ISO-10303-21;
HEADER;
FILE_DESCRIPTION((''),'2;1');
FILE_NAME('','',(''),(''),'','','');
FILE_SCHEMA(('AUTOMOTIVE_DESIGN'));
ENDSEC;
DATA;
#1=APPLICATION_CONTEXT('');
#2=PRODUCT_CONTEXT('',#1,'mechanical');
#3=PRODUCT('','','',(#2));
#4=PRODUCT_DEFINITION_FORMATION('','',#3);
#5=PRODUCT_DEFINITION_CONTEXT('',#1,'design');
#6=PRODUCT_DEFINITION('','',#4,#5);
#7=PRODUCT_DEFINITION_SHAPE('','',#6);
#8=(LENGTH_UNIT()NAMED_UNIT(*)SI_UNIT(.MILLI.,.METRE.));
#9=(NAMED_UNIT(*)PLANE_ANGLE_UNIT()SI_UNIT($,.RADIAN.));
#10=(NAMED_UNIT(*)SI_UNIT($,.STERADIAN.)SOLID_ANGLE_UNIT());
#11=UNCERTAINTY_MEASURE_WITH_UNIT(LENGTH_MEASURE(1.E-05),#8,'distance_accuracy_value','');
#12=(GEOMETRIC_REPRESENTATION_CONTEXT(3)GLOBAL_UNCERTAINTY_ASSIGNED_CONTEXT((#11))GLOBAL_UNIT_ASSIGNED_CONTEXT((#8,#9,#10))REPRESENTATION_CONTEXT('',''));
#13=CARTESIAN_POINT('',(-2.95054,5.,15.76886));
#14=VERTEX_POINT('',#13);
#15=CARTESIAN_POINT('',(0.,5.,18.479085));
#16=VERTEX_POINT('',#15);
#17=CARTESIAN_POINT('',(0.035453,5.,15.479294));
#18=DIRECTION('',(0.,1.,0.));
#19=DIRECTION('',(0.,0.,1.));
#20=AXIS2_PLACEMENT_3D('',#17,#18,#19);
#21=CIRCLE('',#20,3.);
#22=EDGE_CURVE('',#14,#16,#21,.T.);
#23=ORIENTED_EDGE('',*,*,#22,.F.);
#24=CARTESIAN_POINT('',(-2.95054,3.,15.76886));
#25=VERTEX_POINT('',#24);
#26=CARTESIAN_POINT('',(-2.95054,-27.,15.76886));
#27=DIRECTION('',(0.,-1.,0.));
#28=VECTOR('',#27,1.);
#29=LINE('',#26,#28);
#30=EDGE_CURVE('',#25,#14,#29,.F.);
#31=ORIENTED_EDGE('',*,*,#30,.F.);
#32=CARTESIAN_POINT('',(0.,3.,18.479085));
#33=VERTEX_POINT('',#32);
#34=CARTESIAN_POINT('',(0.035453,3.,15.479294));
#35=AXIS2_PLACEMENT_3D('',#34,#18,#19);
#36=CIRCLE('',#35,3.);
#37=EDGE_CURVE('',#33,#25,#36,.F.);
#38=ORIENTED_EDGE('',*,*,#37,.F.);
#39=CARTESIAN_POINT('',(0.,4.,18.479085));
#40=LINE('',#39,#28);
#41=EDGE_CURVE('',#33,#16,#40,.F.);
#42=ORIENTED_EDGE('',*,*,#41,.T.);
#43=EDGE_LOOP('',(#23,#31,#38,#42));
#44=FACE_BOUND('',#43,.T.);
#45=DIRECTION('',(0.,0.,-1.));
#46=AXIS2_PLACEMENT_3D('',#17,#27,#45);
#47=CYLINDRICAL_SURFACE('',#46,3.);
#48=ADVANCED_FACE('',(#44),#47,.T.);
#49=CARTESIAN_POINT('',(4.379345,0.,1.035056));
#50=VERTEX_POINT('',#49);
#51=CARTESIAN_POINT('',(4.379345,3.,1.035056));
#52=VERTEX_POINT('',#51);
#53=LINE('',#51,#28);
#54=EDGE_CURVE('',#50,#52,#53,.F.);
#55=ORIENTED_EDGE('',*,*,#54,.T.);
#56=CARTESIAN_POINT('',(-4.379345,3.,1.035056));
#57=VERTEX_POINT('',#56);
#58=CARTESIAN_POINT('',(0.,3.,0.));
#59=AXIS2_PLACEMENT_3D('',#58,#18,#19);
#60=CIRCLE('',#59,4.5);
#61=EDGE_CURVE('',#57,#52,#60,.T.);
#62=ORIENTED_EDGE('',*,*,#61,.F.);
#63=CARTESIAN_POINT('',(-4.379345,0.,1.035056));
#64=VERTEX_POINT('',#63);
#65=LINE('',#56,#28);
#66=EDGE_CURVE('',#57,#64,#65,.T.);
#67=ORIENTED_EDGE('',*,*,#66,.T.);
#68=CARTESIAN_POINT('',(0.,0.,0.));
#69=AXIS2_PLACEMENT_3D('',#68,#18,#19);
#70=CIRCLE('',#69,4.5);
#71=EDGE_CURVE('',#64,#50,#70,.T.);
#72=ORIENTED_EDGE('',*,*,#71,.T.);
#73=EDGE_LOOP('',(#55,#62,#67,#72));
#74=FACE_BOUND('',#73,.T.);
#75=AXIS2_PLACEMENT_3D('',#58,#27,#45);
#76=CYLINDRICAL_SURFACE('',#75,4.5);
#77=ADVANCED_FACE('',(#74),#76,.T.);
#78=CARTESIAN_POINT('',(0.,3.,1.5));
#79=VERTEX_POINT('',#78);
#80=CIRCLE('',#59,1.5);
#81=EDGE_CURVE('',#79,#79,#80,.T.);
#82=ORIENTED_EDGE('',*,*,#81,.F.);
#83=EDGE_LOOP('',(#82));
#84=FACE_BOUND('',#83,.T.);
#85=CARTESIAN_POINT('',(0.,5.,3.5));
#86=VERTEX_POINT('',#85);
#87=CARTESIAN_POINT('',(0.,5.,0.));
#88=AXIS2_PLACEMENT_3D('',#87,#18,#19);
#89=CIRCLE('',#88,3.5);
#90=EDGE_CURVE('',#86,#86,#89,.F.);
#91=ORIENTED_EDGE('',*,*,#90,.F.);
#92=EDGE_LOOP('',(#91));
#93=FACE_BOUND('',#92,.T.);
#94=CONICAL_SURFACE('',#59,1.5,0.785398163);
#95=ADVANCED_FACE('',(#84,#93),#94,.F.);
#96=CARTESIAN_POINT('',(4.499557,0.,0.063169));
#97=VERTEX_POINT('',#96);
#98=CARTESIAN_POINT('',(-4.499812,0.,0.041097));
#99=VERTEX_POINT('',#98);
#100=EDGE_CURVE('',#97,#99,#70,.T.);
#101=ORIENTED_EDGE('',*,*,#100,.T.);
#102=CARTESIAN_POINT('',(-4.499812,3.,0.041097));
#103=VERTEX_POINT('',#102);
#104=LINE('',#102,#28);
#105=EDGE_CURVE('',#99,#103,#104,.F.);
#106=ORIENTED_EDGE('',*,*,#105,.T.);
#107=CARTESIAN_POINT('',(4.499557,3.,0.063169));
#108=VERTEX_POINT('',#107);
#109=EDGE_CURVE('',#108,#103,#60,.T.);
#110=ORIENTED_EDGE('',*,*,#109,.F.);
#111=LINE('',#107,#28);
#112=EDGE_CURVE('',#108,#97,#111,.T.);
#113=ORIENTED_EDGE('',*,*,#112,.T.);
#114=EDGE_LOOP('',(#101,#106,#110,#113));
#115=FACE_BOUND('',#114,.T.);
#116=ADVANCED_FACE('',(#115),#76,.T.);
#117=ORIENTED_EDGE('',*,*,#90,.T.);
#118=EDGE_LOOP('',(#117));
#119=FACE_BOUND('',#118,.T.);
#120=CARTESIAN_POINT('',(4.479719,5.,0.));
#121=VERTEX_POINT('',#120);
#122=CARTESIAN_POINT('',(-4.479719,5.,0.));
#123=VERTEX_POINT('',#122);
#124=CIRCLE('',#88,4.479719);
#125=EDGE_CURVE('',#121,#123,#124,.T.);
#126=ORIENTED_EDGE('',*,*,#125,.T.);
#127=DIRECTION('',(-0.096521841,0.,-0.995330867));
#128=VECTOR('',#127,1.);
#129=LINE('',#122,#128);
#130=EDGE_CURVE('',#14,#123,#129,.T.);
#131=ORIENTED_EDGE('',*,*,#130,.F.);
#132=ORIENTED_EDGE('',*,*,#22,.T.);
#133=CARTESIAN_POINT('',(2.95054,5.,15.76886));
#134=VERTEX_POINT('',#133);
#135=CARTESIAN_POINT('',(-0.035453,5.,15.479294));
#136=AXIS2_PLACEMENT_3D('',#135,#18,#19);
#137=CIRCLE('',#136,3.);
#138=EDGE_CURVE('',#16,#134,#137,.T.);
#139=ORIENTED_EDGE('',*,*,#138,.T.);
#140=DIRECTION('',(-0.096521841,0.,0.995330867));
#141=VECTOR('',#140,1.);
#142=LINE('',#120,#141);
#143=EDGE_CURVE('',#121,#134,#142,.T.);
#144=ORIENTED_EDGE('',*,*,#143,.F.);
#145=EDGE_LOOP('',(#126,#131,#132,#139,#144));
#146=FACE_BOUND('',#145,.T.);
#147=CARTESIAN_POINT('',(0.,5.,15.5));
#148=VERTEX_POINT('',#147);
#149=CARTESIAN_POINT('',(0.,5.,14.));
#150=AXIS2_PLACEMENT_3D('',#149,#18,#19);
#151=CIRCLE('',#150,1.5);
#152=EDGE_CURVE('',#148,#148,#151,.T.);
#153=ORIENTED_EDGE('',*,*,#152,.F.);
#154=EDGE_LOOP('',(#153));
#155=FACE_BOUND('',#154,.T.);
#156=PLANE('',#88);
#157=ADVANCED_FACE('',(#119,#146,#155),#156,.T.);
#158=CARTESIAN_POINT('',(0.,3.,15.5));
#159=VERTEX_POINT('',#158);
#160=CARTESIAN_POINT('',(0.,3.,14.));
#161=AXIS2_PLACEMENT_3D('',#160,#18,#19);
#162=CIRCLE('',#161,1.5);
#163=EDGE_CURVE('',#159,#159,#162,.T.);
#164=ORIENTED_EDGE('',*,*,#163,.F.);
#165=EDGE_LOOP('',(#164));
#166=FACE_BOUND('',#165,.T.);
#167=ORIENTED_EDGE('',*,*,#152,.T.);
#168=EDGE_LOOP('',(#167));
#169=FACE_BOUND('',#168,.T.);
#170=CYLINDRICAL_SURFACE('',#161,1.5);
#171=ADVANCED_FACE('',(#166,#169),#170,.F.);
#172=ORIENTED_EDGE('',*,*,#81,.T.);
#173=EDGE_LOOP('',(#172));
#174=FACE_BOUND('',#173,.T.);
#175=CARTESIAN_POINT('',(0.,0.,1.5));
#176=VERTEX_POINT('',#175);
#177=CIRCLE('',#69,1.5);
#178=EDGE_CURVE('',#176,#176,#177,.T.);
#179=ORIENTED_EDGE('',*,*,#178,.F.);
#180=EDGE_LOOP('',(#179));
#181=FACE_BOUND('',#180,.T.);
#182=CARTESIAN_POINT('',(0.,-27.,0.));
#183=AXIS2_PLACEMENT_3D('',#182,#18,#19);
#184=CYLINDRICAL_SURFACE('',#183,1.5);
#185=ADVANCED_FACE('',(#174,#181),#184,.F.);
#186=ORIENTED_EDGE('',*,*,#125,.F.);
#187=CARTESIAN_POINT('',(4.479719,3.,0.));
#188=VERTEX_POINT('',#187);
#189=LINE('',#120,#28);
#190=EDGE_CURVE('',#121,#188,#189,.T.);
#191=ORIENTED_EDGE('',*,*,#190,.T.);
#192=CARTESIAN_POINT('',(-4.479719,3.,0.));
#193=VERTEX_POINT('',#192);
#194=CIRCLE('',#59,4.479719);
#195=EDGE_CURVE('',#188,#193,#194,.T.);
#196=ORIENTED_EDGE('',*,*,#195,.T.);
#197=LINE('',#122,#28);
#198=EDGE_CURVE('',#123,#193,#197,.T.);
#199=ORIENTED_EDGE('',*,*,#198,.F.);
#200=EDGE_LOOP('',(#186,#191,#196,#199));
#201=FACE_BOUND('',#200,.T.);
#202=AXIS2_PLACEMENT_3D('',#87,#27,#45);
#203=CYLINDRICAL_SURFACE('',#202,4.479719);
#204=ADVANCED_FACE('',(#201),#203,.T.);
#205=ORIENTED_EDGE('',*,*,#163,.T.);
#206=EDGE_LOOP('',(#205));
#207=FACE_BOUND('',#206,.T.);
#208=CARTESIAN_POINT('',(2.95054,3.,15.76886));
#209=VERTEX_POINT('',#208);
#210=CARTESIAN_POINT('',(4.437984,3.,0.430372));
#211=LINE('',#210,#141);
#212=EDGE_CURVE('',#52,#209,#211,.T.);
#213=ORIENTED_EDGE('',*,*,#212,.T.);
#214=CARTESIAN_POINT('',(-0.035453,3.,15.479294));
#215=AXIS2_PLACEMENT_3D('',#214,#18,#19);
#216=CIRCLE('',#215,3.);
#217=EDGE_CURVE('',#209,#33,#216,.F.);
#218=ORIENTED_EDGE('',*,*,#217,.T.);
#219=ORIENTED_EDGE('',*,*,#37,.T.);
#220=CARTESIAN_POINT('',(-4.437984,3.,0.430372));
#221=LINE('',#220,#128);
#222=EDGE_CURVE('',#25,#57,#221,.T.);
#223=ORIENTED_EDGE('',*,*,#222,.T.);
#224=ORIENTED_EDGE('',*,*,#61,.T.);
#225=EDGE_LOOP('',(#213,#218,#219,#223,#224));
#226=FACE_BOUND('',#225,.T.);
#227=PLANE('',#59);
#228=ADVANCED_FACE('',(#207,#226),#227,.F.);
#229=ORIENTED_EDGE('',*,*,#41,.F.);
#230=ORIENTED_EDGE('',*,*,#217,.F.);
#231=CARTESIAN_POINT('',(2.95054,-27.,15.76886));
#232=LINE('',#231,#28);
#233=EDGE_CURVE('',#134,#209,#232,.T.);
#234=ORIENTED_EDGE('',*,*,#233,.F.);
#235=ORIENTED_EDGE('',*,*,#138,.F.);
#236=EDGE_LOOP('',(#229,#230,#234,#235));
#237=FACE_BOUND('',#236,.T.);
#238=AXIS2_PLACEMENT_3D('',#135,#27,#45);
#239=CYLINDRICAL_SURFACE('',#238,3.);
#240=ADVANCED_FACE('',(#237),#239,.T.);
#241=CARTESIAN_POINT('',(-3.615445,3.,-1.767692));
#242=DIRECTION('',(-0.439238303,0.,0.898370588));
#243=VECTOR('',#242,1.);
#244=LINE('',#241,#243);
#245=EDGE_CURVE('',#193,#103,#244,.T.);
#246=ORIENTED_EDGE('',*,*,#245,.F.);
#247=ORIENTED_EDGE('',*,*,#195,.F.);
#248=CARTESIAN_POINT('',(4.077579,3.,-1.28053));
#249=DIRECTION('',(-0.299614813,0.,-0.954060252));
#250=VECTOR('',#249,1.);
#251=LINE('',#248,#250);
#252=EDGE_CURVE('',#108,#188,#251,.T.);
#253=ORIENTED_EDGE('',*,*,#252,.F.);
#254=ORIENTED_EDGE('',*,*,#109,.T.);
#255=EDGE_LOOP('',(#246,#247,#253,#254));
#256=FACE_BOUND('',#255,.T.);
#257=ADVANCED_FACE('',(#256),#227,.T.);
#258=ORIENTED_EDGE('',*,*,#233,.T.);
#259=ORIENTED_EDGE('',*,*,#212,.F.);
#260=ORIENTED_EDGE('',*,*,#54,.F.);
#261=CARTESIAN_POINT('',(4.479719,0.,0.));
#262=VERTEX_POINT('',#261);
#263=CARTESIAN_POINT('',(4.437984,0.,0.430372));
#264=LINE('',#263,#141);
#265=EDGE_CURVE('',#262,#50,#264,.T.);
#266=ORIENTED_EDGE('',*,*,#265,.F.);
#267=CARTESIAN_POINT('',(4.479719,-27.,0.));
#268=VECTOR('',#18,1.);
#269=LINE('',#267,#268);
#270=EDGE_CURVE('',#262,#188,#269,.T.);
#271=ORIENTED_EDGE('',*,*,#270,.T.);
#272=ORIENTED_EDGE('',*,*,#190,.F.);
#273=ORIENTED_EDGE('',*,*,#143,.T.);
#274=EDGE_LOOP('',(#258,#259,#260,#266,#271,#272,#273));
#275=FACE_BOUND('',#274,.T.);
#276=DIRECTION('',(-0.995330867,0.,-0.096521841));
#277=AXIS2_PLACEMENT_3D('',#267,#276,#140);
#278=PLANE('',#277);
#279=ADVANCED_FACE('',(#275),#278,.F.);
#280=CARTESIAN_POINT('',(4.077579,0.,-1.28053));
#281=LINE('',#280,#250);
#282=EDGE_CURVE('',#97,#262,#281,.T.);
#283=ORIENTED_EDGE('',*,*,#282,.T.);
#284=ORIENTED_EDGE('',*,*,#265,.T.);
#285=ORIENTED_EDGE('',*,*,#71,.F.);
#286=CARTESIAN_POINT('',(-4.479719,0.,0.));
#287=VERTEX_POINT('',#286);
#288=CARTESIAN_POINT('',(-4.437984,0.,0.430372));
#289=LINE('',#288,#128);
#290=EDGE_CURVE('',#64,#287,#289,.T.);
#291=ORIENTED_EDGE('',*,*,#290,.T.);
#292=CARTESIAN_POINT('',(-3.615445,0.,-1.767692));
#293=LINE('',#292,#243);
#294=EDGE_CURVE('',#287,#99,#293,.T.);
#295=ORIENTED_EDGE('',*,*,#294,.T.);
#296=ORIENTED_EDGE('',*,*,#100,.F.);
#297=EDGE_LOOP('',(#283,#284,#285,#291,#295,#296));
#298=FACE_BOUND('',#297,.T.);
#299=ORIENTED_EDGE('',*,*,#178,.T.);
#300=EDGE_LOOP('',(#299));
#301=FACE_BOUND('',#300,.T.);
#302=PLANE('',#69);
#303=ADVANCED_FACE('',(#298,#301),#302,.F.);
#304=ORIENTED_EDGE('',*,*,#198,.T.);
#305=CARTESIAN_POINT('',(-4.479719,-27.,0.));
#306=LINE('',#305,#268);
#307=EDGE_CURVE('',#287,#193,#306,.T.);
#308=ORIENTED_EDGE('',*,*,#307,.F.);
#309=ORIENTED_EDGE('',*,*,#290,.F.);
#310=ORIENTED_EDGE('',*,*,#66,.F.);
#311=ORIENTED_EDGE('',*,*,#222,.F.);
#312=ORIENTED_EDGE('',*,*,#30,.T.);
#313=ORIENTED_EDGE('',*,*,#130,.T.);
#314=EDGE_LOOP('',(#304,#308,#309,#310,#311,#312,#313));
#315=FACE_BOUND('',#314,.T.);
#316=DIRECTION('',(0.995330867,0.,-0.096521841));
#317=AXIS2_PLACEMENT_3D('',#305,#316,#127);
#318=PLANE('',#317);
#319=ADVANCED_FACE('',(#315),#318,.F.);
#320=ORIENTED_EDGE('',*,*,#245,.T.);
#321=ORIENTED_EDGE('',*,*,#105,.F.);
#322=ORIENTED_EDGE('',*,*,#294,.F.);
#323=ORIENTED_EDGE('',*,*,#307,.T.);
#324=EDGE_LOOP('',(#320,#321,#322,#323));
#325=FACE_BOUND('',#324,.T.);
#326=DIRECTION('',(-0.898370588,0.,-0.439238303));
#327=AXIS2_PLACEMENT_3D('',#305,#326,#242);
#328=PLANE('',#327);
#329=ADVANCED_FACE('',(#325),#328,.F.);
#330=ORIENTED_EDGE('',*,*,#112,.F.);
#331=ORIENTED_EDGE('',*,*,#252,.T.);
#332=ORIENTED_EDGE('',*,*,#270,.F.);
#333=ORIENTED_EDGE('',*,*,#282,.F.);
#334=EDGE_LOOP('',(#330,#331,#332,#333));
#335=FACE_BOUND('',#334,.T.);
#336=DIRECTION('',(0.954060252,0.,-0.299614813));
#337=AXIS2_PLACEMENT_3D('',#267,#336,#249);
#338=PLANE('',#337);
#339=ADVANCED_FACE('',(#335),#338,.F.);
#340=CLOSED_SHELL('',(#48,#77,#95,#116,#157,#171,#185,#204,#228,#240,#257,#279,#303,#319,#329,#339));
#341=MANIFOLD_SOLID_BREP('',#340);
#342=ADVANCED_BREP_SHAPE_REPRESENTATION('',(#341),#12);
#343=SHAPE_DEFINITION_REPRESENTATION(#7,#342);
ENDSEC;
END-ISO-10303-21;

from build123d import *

# Parameters (mm, degrees)
SKETCH1_R           = 4.5
BOSS_EXTRUDE1_DEPTH = 3
BOSS_EXTRUDE2_DEPTH = 2
SKETCH3_R           = 1
CUT_EXTRUDE1_DEPTH  = 2
SKETCH4_R           = 1.5
CUT_EXTRUDE3_DEPTH  = 32
CHAMFER1_SIZE       = 2
CUT_EXTRUDE4_DEPTH  = 32
FILLET1_R           = 3
SKETCH6_R           = 1.5
CUT_EXTRUDE5_DEPTH  = 2


with BuildPart() as part:
    # Sketch1 → Boss-Extrude1 (new body)
    with BuildSketch(Plane(origin=(0, 0, 0), x_dir=(1, 0, 0), z_dir=(0, 1, 0))):
        with Locations(Location((0, 0, 0), (0, 0, 270))):
            Circle(SKETCH1_R)
    extrude(amount=BOSS_EXTRUDE1_DEPTH)

    # Sketch2 → Boss-Extrude2 (add)
    with BuildSketch(Plane(origin=(0, 3, 0), x_dir=(1, 0, 0), z_dir=(0, 1, 0))):
        with BuildLine():
            Line((4.479718811, 0), (4.479718811, -14))
            ThreePointArc((4.479718811, -14), (0, -18.479718811), (-4.479718811, -14))
            Line((-4.479718811, -14), (-4.479718811, 0))
            ThreePointArc((-4.479718811, 0), (0, 4.479718811), (4.479718811, 0))
        make_face()
    extrude(amount=BOSS_EXTRUDE2_DEPTH)

    # Sketch3 → Cut-Extrude1 (cut)
    with BuildSketch(Plane(origin=(0, 5, 0), x_dir=(1, 0, 0), z_dir=(0, 1, 0))):
        with Locations(Location((0, -14, 0), (0, 0, 270))):
            Circle(SKETCH3_R)
    extrude(amount=-CUT_EXTRUDE1_DEPTH, mode=Mode.SUBTRACT)

    # Sketch4 → Cut-Extrude3 (cut)
    with BuildSketch(Plane(origin=(0, 5, 0), x_dir=(1, 0, 0), z_dir=(0, 1, 0))):
        with Locations(Location((0, 0, 0), (0, 0, 270))):
            Circle(SKETCH4_R)
    extrude(amount=-CUT_EXTRUDE3_DEPTH, mode=Mode.SUBTRACT)

    # Chamfer1
    chamfer1_edges = [part.edges().sort_by_distance(p)[0] for p in [
        (0, 5, -1.5),
    ]]
    chamfer(chamfer1_edges, length=CHAMFER1_SIZE)

    # Sketch5 → Cut-Extrude4 (cut)
    with BuildSketch(Plane(origin=(0, 5, 0), x_dir=(1, 0, 0), z_dir=(0, 1, 0))):
        Polygon((4.479718811, 0), (2.781543996, -17.511537216), (5.759954013, -17.140136672), (7.823781183, -10.648462117), align=None)
        Polygon((-4.479718811, 0), (-2.781543996, -17.511537216), (-11.97019759, -15.320216349), align=None)
    extrude(amount=-CUT_EXTRUDE4_DEPTH, mode=Mode.SUBTRACT)

    # Fillet1
    # the kernel refuses this fillet: 3 mm, written as the material it takes off along each edge
    with BuildSketch(Plane(origin=(-2.781543996, 12.615972723, 17.511537216), x_dir=(0.9482948551929795, 0, 0.31739071759351406), z_dir=(0, -1, 0))) as fillet1_piece_1:
        with BuildLine():
            CenterArc((2.026328718, -2.82125448), FILLET1_R, 70.121899875, 85.833982954)
            Line((-0.713367294, -1.59893465), (0, 0))
            ThreePointArc((0, 0), (1.523194545, 0.26690989), (3.046389089, 0))
        make_face()
    extrude(amount=17.231945445, mode=Mode.SUBTRACT)
    with BuildSketch(Plane(origin=(2.781543996, 12.615972723, 17.511537216), x_dir=(-0.9482948551929786, 0, 0.3173907175935166), z_dir=(0, -1, 0))) as fillet1_piece_2:
        with BuildLine():
            CenterArc((2.026328718, 2.82125448), FILLET1_R, 204.044117171, 85.833982954)
            Line((-0.713367294, 1.59893465), (0, 0))
            ThreePointArc((0, 0), (1.523194545, -0.26690989), (3.046389089, 0))
        make_face()
    extrude(amount=17.231945445, mode=Mode.SUBTRACT)

    # Sketch6 → Cut-Extrude5 (cut)
    with BuildSketch(Plane(origin=(0, 5, 0), x_dir=(1, 0, 0), z_dir=(0, 1, 0))):
        with Locations(Location((0, -14, 0), (0, 0, 270))):
            Circle(SKETCH6_R)
    extrude(amount=-CUT_EXTRUDE5_DEPTH, mode=Mode.SUBTRACT)


solid = part.part
